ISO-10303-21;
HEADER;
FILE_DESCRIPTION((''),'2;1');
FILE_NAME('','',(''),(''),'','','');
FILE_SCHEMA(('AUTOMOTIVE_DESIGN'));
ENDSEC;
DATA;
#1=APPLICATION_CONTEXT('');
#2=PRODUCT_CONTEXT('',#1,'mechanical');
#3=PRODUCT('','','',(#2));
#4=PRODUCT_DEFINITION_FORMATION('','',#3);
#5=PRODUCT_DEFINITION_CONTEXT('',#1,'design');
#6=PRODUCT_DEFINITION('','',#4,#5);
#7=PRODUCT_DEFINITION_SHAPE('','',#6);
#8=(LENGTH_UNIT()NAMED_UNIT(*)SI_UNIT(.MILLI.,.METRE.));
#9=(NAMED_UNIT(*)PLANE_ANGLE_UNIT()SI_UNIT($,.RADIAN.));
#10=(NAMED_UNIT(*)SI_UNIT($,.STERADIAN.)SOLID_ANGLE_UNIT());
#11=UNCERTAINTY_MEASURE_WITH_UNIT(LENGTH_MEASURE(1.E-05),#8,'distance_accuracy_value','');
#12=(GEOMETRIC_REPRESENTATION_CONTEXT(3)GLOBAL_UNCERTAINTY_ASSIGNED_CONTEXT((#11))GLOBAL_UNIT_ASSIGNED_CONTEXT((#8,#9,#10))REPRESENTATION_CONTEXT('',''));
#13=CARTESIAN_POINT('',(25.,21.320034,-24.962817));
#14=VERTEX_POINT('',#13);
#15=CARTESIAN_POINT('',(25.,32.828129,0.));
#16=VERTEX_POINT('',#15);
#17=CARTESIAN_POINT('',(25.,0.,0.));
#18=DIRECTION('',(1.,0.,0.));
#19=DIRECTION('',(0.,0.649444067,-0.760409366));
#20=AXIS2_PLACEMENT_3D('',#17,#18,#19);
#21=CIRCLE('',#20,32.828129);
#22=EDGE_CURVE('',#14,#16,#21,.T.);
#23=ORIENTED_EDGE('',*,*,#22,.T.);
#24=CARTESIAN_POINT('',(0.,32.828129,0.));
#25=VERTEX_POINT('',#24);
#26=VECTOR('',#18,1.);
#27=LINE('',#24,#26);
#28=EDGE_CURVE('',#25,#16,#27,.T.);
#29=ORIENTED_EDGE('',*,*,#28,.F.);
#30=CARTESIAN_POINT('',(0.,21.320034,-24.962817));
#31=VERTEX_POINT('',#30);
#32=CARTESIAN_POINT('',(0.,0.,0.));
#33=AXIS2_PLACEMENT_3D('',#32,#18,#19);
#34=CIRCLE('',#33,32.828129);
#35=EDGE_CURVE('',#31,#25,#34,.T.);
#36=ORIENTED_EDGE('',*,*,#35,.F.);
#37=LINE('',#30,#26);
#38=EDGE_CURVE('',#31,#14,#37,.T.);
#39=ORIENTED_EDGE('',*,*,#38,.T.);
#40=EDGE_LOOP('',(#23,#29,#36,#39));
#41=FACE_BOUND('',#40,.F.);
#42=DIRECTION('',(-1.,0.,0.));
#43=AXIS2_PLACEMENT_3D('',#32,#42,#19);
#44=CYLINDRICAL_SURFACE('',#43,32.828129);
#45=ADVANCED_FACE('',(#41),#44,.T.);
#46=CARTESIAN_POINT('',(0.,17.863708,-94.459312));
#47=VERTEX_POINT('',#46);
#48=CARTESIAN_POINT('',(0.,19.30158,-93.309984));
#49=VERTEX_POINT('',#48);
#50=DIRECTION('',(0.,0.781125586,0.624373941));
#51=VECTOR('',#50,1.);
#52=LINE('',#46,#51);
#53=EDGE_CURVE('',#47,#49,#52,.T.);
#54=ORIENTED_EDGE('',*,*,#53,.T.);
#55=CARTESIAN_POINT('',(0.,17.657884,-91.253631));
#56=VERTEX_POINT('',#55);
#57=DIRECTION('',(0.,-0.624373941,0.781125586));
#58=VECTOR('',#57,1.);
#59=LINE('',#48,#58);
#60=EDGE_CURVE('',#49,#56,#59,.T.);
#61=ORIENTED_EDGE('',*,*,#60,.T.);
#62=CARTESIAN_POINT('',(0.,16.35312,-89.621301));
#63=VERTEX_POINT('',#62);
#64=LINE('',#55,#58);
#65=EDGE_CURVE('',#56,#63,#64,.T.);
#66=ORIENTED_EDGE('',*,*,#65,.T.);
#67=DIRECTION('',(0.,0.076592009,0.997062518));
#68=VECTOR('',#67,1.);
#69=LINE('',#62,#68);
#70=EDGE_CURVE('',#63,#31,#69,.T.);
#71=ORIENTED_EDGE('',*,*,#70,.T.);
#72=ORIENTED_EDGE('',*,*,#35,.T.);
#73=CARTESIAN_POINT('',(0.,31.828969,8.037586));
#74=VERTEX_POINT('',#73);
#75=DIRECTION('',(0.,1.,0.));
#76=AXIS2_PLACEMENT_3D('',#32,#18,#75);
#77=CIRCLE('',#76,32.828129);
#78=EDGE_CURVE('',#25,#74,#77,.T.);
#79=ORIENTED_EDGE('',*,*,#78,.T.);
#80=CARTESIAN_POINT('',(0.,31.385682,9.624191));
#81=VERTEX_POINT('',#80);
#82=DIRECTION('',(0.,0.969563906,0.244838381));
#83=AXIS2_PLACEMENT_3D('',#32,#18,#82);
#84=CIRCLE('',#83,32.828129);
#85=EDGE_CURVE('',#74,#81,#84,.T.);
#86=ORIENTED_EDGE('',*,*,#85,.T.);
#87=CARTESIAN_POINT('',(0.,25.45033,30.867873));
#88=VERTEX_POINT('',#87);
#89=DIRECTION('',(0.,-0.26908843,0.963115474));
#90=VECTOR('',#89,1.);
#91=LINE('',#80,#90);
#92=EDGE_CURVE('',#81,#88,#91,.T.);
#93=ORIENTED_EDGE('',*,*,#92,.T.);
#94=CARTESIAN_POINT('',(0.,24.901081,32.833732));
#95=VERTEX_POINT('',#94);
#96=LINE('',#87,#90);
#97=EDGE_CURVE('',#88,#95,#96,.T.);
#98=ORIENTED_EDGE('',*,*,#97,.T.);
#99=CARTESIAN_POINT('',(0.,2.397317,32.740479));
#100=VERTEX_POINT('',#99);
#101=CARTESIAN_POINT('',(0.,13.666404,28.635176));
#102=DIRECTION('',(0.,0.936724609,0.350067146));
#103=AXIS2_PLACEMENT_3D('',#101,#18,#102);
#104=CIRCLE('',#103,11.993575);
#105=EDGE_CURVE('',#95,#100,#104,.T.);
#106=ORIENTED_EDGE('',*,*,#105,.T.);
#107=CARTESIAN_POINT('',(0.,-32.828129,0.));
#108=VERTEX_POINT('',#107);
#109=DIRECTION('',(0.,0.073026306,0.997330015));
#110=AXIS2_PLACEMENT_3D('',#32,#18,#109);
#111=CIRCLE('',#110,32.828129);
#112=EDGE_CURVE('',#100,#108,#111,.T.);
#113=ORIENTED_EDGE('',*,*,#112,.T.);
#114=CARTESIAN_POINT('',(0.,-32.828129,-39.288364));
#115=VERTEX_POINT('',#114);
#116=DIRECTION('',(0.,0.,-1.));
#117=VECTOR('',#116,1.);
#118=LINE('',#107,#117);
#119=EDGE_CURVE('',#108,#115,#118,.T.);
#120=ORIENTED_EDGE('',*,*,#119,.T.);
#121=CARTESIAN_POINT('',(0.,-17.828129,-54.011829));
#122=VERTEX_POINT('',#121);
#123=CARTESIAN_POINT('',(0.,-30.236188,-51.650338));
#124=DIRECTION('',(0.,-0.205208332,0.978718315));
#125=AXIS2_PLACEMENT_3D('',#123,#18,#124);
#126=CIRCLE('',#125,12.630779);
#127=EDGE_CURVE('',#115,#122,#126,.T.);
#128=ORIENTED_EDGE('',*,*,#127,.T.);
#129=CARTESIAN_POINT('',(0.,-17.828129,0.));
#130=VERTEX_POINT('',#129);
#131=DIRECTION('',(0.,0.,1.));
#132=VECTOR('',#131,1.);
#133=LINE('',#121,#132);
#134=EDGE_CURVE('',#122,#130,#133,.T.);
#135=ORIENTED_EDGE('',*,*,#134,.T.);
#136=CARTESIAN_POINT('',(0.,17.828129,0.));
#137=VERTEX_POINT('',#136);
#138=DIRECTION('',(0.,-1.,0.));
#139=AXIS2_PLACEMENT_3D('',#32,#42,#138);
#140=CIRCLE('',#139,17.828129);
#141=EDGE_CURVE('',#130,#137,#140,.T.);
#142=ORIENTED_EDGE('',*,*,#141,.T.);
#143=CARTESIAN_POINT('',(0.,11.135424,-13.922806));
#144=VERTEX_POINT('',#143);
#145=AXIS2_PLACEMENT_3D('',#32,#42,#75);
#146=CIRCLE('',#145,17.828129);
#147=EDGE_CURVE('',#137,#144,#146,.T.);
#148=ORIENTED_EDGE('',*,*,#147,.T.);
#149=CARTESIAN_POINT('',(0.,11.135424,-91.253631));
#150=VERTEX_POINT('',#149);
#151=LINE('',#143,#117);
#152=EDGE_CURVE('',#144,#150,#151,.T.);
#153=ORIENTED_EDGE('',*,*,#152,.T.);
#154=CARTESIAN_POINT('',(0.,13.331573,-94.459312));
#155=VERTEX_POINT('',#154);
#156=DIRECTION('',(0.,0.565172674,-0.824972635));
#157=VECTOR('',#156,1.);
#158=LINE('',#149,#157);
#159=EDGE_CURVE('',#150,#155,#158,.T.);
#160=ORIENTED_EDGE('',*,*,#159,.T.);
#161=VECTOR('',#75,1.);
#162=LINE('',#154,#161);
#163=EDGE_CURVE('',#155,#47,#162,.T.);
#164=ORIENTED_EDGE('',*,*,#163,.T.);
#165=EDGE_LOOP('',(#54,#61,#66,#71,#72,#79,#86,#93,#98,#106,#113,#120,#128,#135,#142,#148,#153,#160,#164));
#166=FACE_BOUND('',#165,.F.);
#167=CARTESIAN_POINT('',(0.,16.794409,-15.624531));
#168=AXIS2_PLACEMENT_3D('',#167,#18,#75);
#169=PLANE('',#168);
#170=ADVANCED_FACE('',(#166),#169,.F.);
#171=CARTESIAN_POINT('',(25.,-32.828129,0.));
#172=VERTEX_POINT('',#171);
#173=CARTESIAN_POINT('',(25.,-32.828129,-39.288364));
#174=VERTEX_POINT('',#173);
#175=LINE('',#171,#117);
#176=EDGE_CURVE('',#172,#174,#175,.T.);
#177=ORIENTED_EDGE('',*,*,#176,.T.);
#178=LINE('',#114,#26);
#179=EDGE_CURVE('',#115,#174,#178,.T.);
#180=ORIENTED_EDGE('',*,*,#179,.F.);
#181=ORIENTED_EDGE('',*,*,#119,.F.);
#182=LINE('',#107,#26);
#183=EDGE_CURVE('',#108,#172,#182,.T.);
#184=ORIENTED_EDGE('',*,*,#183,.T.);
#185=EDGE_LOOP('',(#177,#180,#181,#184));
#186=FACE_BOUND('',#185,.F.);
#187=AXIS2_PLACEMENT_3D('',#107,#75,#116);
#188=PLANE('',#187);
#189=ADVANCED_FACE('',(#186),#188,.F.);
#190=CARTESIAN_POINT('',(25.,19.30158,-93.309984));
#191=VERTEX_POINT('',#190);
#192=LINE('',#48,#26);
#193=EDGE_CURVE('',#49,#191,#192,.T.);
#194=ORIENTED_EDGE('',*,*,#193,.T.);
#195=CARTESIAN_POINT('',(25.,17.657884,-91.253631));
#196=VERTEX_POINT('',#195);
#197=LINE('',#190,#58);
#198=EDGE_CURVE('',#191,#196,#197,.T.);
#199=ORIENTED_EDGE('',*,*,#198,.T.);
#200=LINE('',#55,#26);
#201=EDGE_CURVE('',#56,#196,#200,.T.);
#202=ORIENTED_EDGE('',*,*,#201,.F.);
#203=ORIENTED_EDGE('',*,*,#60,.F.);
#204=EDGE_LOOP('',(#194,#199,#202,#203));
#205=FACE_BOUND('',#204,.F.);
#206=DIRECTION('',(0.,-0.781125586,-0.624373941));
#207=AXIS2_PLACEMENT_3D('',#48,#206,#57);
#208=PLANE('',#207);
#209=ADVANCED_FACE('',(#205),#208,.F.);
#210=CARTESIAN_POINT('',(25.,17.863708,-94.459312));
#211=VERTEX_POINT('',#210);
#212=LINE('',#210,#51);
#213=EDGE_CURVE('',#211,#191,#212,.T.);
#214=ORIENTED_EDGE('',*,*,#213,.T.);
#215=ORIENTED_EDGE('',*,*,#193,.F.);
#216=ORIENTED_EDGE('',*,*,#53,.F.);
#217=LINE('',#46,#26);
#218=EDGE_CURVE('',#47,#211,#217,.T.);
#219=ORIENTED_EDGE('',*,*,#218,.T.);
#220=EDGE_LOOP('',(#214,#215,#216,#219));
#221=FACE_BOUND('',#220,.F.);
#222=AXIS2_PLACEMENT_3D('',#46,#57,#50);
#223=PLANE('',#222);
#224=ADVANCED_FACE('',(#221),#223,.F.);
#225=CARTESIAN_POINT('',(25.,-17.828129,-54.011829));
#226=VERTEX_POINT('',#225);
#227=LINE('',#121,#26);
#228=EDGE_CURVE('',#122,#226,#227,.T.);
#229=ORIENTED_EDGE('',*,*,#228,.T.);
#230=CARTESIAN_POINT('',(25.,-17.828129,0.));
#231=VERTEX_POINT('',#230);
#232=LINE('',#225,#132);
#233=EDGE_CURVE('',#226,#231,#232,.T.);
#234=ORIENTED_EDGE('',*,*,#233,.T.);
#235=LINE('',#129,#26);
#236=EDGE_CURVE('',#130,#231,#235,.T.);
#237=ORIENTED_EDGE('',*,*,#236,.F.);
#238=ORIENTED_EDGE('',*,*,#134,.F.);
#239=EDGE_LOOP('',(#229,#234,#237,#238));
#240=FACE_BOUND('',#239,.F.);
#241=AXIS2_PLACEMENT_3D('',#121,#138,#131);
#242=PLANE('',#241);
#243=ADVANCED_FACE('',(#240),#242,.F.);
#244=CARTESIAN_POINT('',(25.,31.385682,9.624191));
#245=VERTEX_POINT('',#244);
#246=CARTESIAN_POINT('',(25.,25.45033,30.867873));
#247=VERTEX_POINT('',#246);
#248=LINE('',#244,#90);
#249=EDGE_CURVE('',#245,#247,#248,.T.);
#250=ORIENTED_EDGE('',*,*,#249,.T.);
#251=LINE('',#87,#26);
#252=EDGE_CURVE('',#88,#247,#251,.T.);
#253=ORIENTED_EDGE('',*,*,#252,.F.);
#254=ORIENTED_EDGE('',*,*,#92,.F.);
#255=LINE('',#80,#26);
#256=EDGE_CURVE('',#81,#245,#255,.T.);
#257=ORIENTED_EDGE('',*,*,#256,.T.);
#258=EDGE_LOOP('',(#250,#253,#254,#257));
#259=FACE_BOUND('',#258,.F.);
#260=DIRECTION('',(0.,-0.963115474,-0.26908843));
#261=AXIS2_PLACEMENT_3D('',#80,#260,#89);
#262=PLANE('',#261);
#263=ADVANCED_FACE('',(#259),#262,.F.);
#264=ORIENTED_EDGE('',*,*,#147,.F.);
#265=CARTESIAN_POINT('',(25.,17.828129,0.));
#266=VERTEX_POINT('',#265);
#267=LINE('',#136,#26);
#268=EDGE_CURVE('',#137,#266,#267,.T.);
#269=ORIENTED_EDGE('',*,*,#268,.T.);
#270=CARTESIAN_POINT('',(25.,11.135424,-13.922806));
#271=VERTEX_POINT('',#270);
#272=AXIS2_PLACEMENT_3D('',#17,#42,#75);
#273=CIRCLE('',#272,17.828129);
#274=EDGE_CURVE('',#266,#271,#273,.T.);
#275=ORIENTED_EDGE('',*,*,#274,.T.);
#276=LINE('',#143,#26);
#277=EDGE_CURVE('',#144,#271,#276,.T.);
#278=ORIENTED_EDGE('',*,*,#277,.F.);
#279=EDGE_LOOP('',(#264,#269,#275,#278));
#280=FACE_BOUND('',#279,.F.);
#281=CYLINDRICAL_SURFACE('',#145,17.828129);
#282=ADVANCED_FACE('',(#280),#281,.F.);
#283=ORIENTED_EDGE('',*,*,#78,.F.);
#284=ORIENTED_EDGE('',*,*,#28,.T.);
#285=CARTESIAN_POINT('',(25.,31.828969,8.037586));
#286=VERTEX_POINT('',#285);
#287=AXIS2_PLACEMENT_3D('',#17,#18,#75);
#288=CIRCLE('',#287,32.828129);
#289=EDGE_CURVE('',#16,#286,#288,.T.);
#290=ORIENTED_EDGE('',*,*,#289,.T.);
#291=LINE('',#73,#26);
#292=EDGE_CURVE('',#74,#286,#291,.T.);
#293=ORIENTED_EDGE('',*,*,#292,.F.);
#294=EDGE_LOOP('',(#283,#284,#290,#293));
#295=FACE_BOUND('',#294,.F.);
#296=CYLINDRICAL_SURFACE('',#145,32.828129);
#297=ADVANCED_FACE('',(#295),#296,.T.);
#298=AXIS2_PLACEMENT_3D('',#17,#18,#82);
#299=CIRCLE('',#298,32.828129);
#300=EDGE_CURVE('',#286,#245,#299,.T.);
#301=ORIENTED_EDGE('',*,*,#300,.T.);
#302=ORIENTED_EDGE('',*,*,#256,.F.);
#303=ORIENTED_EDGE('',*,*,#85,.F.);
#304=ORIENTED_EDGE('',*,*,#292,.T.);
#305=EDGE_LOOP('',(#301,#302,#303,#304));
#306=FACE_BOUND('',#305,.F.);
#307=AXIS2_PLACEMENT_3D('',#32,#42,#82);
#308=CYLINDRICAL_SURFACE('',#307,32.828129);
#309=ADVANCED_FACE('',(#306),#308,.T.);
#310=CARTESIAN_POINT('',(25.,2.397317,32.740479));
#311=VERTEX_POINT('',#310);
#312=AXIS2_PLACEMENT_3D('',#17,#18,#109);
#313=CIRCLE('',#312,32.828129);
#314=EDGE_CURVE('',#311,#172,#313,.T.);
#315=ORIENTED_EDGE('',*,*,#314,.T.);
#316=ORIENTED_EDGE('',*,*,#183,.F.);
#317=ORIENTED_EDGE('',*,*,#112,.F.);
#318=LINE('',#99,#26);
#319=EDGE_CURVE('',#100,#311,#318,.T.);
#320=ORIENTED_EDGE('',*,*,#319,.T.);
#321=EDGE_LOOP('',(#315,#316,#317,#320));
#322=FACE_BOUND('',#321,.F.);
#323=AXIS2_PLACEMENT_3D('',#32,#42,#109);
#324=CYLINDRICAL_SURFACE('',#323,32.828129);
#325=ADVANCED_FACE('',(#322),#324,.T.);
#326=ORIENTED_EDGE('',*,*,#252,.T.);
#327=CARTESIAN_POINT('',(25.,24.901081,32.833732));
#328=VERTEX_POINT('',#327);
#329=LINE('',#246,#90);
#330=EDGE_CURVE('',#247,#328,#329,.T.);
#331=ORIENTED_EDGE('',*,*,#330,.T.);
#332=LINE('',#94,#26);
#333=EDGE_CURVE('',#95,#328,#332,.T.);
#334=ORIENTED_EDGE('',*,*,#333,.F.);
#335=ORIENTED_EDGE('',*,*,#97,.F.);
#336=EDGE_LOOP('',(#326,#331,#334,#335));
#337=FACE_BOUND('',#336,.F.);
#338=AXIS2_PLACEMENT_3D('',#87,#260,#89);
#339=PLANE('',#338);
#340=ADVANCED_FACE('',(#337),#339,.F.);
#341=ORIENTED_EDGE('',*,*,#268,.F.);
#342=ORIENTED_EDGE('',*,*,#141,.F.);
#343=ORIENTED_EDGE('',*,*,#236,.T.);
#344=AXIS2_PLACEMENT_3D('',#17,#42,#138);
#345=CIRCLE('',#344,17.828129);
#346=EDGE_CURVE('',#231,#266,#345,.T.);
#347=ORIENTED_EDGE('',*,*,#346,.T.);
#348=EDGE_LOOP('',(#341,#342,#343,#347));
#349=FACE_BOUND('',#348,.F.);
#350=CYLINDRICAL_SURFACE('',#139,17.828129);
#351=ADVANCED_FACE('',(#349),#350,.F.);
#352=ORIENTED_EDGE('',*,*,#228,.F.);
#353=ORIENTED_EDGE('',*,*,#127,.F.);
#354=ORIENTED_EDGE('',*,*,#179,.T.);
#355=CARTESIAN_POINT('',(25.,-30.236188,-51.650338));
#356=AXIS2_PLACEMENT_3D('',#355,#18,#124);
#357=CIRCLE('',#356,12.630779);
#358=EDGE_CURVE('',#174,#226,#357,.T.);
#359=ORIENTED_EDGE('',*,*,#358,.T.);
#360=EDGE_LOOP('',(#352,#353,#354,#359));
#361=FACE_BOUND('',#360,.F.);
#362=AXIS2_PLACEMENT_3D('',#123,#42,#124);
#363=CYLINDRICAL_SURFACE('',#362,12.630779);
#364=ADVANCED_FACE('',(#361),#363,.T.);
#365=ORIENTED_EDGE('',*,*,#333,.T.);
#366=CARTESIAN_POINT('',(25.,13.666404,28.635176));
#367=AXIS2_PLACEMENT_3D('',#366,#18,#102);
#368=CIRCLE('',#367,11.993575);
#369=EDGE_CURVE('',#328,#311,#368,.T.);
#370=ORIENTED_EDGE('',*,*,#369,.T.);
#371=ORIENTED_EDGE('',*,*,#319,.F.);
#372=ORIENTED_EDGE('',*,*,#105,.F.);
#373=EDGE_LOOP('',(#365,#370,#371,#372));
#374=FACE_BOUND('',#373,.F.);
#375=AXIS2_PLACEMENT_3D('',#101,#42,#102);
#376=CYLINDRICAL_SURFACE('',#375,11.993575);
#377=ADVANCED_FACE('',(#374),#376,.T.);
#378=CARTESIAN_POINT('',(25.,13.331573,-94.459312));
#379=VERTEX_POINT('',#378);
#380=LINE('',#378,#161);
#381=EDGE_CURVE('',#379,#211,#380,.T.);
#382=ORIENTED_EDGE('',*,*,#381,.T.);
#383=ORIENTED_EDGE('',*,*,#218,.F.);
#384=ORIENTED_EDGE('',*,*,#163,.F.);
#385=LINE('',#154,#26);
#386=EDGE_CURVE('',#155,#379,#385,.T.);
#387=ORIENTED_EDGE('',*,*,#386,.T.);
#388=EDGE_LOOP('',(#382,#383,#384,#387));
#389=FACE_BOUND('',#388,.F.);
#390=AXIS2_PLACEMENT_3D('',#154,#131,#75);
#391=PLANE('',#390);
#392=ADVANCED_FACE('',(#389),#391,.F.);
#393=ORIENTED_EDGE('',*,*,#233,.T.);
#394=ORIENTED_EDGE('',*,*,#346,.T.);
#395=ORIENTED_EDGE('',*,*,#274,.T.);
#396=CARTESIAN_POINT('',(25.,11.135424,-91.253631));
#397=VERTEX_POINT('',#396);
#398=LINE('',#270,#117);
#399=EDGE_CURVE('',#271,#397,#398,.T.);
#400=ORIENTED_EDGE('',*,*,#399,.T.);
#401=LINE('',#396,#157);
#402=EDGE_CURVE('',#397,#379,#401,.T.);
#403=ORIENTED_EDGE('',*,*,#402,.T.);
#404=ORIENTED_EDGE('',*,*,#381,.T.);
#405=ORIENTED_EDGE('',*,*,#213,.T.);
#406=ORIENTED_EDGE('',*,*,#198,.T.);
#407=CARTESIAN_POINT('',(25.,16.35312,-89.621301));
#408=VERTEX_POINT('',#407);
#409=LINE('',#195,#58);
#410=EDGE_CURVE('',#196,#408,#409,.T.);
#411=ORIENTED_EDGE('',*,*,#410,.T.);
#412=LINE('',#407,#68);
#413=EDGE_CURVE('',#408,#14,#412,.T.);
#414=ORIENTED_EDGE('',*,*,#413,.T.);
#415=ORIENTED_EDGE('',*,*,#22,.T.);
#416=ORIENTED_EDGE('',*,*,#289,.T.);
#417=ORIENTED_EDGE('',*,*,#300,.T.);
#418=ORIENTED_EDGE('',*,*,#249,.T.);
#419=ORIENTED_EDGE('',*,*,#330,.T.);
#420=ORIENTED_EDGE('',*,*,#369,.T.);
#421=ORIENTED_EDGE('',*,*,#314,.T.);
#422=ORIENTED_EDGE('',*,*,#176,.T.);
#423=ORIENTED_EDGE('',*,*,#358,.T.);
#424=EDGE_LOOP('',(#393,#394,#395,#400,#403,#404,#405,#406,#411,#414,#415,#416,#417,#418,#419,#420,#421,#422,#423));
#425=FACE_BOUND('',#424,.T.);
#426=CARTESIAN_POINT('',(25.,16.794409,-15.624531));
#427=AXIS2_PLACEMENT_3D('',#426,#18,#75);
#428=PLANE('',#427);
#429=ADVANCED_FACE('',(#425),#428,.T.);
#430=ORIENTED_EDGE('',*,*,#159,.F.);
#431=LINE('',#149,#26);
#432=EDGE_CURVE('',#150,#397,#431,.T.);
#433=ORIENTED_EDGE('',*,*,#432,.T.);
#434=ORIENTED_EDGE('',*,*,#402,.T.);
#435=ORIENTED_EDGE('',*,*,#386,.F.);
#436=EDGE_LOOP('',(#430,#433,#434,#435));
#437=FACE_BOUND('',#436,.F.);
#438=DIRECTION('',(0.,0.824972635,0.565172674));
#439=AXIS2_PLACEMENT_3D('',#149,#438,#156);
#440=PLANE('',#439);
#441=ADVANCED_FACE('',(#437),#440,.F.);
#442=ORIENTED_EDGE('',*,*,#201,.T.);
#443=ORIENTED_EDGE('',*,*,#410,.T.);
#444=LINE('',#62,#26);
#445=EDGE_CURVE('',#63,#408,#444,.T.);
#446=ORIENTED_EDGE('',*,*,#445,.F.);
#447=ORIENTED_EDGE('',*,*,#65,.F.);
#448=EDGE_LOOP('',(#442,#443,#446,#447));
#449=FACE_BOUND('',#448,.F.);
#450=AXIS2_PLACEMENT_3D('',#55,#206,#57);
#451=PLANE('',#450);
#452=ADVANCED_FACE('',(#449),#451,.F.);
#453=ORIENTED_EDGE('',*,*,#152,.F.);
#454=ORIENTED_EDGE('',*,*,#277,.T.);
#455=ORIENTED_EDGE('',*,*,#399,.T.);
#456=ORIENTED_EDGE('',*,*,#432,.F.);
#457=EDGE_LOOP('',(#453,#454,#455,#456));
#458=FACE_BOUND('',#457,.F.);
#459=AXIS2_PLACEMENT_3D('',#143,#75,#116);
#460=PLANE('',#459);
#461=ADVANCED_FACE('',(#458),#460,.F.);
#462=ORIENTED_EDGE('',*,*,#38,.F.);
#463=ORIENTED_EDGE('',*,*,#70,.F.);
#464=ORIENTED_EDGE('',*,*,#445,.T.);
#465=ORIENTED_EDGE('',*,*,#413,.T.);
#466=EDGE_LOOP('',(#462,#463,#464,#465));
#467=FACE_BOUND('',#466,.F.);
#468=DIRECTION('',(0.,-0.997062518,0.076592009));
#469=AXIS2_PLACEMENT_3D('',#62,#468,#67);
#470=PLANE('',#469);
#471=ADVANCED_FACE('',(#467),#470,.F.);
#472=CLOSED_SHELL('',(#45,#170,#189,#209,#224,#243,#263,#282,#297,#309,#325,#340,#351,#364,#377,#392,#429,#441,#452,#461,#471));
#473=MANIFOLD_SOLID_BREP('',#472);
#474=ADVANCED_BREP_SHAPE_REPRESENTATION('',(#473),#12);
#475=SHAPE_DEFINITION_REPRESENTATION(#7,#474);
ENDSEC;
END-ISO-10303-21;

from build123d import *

# Parameters (mm, degrees)
F1_DEPTH = 25


# Not quite as in the source:
# - a feature names something its author has since deleted; it is built from what else it names


with BuildPart() as f1:
    # F0 (on Right) → F1 (new body)
    with BuildSketch(Plane.YZ):
        with BuildLine():
            Line((21.3200338185, 0), (17.8281293297, 0))
            ThreePointArc((17.8281293297, 0), (16.0680734174, -7.7239376), (11.135423556, -13.9228063846))
            Line((11.135423556, -13.9228063846), (11.135423556, -30.8818460833))
            ThreePointArc((11.135423556, -30.8818460833), (16.4953904054, -28.3828851715), (21.3200338185, -24.9628170138))
            Line((21.3200338185, -24.9628170138), (21.3200338185, 0))
        make_face()
        with BuildLine():
            ThreePointArc((-17.8281293297, 0), (0, 17.8281293297), (17.8281293297, 0))
            Line((17.8281293297, 0), (21.3200338185, 0))
            Line((21.3200338185, 0), (21.3200338185, -24.9628170138))
            ThreePointArc((21.3200338185, -24.9628170138), (29.8126055788, -13.7438940584), (32.8281293297, 0))
            ThreePointArc((32.8281293297, 0), (32.5773816899, 4.0497256101), (31.8289692891, 8.0375860357))
            Line((31.8289692891, 8.0375860357), (31.3856816717, 9.6241914615))
            ThreePointArc((31.3856816717, 9.6241914615), (28.3999929291, 16.4659186477), (23.9458348633, 22.4562478608))
            ThreePointArc((23.9458348633, 22.4562478608), (8.5005350475, 17.8111454186), (2.3973170077, 32.7404787144))
            ThreePointArc((2.3973170077, 32.7404787144), (-22.3493472221, 24.0456389815), (-32.8281293297, 0))
            Line((-32.8281293297, 0), (-17.8281293297, 0))
        make_face()
        with BuildLine():
            Line((-17.8281293297, -27.5652658229), (-17.8281293297, 0))
            Line((-17.8281293297, 0), (-32.8281293297, 0))
            ThreePointArc((-32.8281293297, 0), (-28.8353100436, -15.6911111771), (-17.8281293297, -27.5652658229))
        make_face()
        with BuildLine():
            Line((-17.8281293297, -49.2888468657), (-17.8281293297, -27.5652658229))
            ThreePointArc((-17.8281293297, -27.5652658229), (-28.8353100436, -15.6911111771), (-32.8281293297, 0))
            Line((-32.8281293297, 0), (-32.8281293297, -39.2883635356))
            ThreePointArc((-32.8281293297, -39.2883635356), (-23.2296585262, -41.1410511261), (-17.8281293297, -49.2888468657))
        make_face()
        with BuildLine():
            ThreePointArc((21.3200338185, -24.9628170138), (16.4953904054, -28.3828851715), (11.135423556, -30.8818460833))
            Line((11.135423556, -30.8818460833), (11.135423556, -91.2536308169))
            Line((11.135423556, -91.2536308169), (16.2277286872, -91.2536308169))
            Line((16.2277286872, -91.2536308169), (16.3531204545, -89.621300844))
            Line((16.3531204545, -89.621300844), (21.3200338185, -24.9628170138))
        make_face()
        with BuildLine():
            Line((-17.8281293297, -49.3592731655), (-17.8281293297, -49.2888468657))
            ThreePointArc((-17.8281293297, -49.2888468657), (-23.2296585262, -41.1410511261), (-32.8281293297, -39.2883635356))
            Line((-32.8281293297, -39.2883635356), (-32.8281293297, -49.3592731655))
            Line((-32.8281293297, -49.3592731655), (-17.8281293297, -49.3592731655))
        make_face()
        with BuildLine():
            ThreePointArc((24.9010812958, 32.8337324859), (13.6167044371, 40.6286479576), (2.3973170077, 32.7404787144))
            ThreePointArc((2.3973170077, 32.7404787144), (14.1397228999, 29.626918699), (23.9458348633, 22.4562478608))
            ThreePointArc((23.9458348633, 22.4562478608), (25.2235009878, 25.4290316666), (25.6599794461, 28.6351758987))
            ThreePointArc((25.6599794461, 28.6351758987), (25.6074521104, 29.7564349958), (25.4503302031, 30.867872709))
            Line((25.4503302031, 30.867872709), (24.9010812958, 32.8337324859))
        make_face()
        with BuildLine():
            ThreePointArc((23.9458348633, 22.4562478608), (14.1397228999, 29.626918699), (2.3973170077, 32.7404787144))
            ThreePointArc((2.3973170077, 32.7404787144), (8.5005350475, 17.8111454186), (23.9458348633, 22.4562478608))
        make_face()
        with BuildLine():
            Line((-32.8281293297, -49.3592731655), (-32.8281293297, -39.2883635356))
            ThreePointArc((-32.8281293297, -39.2883635356), (-39.0840214493, -60.6643501174), (-17.8281293297, -54.0118288841))
            Line((-17.8281293297, -54.0118288841), (-17.8281293297, -49.3592731655))
            Line((-17.8281293297, -49.3592731655), (-32.8281293297, -49.3592731655))
        make_face()
        Polygon((16.2277286872, -91.2536308169), (11.135423556, -91.2536308169), (13.3315734565, -94.4593122868), (17.8637079006, -94.4593122868), (19.3015802652, -93.3099836111), (17.6578841403, -91.2536308169), align=None)
        Polygon((17.6578841403, -91.2536308169), (16.3531204545, -89.621300844), (16.2277286872, -91.2536308169), align=None)
        with BuildLine():
            ThreePointArc((25.6599794461, 28.6351758987), (25.2235009878, 25.4290316666), (23.9458348633, 22.4562478608))
            ThreePointArc((23.9458348633, 22.4562478608), (28.3999929291, 16.4659186477), (31.3856816717, 9.6241914615))
            Line((31.3856816717, 9.6241914615), (25.4503302031, 30.867872709))
            ThreePointArc((25.4503302031, 30.867872709), (25.6074521104, 29.7564349958), (25.6599794461, 28.6351758987))
        make_face()
        with BuildLine():
            Line((31.3856816717, 9.6241914615), (31.8289692891, 8.0375860357))
            ThreePointArc((31.8289692891, 8.0375860357), (31.6172793456, 8.8336697962), (31.3856816717, 9.6241914615))
        make_face()
    extrude(amount=F1_DEPTH)


solid = f1.part
